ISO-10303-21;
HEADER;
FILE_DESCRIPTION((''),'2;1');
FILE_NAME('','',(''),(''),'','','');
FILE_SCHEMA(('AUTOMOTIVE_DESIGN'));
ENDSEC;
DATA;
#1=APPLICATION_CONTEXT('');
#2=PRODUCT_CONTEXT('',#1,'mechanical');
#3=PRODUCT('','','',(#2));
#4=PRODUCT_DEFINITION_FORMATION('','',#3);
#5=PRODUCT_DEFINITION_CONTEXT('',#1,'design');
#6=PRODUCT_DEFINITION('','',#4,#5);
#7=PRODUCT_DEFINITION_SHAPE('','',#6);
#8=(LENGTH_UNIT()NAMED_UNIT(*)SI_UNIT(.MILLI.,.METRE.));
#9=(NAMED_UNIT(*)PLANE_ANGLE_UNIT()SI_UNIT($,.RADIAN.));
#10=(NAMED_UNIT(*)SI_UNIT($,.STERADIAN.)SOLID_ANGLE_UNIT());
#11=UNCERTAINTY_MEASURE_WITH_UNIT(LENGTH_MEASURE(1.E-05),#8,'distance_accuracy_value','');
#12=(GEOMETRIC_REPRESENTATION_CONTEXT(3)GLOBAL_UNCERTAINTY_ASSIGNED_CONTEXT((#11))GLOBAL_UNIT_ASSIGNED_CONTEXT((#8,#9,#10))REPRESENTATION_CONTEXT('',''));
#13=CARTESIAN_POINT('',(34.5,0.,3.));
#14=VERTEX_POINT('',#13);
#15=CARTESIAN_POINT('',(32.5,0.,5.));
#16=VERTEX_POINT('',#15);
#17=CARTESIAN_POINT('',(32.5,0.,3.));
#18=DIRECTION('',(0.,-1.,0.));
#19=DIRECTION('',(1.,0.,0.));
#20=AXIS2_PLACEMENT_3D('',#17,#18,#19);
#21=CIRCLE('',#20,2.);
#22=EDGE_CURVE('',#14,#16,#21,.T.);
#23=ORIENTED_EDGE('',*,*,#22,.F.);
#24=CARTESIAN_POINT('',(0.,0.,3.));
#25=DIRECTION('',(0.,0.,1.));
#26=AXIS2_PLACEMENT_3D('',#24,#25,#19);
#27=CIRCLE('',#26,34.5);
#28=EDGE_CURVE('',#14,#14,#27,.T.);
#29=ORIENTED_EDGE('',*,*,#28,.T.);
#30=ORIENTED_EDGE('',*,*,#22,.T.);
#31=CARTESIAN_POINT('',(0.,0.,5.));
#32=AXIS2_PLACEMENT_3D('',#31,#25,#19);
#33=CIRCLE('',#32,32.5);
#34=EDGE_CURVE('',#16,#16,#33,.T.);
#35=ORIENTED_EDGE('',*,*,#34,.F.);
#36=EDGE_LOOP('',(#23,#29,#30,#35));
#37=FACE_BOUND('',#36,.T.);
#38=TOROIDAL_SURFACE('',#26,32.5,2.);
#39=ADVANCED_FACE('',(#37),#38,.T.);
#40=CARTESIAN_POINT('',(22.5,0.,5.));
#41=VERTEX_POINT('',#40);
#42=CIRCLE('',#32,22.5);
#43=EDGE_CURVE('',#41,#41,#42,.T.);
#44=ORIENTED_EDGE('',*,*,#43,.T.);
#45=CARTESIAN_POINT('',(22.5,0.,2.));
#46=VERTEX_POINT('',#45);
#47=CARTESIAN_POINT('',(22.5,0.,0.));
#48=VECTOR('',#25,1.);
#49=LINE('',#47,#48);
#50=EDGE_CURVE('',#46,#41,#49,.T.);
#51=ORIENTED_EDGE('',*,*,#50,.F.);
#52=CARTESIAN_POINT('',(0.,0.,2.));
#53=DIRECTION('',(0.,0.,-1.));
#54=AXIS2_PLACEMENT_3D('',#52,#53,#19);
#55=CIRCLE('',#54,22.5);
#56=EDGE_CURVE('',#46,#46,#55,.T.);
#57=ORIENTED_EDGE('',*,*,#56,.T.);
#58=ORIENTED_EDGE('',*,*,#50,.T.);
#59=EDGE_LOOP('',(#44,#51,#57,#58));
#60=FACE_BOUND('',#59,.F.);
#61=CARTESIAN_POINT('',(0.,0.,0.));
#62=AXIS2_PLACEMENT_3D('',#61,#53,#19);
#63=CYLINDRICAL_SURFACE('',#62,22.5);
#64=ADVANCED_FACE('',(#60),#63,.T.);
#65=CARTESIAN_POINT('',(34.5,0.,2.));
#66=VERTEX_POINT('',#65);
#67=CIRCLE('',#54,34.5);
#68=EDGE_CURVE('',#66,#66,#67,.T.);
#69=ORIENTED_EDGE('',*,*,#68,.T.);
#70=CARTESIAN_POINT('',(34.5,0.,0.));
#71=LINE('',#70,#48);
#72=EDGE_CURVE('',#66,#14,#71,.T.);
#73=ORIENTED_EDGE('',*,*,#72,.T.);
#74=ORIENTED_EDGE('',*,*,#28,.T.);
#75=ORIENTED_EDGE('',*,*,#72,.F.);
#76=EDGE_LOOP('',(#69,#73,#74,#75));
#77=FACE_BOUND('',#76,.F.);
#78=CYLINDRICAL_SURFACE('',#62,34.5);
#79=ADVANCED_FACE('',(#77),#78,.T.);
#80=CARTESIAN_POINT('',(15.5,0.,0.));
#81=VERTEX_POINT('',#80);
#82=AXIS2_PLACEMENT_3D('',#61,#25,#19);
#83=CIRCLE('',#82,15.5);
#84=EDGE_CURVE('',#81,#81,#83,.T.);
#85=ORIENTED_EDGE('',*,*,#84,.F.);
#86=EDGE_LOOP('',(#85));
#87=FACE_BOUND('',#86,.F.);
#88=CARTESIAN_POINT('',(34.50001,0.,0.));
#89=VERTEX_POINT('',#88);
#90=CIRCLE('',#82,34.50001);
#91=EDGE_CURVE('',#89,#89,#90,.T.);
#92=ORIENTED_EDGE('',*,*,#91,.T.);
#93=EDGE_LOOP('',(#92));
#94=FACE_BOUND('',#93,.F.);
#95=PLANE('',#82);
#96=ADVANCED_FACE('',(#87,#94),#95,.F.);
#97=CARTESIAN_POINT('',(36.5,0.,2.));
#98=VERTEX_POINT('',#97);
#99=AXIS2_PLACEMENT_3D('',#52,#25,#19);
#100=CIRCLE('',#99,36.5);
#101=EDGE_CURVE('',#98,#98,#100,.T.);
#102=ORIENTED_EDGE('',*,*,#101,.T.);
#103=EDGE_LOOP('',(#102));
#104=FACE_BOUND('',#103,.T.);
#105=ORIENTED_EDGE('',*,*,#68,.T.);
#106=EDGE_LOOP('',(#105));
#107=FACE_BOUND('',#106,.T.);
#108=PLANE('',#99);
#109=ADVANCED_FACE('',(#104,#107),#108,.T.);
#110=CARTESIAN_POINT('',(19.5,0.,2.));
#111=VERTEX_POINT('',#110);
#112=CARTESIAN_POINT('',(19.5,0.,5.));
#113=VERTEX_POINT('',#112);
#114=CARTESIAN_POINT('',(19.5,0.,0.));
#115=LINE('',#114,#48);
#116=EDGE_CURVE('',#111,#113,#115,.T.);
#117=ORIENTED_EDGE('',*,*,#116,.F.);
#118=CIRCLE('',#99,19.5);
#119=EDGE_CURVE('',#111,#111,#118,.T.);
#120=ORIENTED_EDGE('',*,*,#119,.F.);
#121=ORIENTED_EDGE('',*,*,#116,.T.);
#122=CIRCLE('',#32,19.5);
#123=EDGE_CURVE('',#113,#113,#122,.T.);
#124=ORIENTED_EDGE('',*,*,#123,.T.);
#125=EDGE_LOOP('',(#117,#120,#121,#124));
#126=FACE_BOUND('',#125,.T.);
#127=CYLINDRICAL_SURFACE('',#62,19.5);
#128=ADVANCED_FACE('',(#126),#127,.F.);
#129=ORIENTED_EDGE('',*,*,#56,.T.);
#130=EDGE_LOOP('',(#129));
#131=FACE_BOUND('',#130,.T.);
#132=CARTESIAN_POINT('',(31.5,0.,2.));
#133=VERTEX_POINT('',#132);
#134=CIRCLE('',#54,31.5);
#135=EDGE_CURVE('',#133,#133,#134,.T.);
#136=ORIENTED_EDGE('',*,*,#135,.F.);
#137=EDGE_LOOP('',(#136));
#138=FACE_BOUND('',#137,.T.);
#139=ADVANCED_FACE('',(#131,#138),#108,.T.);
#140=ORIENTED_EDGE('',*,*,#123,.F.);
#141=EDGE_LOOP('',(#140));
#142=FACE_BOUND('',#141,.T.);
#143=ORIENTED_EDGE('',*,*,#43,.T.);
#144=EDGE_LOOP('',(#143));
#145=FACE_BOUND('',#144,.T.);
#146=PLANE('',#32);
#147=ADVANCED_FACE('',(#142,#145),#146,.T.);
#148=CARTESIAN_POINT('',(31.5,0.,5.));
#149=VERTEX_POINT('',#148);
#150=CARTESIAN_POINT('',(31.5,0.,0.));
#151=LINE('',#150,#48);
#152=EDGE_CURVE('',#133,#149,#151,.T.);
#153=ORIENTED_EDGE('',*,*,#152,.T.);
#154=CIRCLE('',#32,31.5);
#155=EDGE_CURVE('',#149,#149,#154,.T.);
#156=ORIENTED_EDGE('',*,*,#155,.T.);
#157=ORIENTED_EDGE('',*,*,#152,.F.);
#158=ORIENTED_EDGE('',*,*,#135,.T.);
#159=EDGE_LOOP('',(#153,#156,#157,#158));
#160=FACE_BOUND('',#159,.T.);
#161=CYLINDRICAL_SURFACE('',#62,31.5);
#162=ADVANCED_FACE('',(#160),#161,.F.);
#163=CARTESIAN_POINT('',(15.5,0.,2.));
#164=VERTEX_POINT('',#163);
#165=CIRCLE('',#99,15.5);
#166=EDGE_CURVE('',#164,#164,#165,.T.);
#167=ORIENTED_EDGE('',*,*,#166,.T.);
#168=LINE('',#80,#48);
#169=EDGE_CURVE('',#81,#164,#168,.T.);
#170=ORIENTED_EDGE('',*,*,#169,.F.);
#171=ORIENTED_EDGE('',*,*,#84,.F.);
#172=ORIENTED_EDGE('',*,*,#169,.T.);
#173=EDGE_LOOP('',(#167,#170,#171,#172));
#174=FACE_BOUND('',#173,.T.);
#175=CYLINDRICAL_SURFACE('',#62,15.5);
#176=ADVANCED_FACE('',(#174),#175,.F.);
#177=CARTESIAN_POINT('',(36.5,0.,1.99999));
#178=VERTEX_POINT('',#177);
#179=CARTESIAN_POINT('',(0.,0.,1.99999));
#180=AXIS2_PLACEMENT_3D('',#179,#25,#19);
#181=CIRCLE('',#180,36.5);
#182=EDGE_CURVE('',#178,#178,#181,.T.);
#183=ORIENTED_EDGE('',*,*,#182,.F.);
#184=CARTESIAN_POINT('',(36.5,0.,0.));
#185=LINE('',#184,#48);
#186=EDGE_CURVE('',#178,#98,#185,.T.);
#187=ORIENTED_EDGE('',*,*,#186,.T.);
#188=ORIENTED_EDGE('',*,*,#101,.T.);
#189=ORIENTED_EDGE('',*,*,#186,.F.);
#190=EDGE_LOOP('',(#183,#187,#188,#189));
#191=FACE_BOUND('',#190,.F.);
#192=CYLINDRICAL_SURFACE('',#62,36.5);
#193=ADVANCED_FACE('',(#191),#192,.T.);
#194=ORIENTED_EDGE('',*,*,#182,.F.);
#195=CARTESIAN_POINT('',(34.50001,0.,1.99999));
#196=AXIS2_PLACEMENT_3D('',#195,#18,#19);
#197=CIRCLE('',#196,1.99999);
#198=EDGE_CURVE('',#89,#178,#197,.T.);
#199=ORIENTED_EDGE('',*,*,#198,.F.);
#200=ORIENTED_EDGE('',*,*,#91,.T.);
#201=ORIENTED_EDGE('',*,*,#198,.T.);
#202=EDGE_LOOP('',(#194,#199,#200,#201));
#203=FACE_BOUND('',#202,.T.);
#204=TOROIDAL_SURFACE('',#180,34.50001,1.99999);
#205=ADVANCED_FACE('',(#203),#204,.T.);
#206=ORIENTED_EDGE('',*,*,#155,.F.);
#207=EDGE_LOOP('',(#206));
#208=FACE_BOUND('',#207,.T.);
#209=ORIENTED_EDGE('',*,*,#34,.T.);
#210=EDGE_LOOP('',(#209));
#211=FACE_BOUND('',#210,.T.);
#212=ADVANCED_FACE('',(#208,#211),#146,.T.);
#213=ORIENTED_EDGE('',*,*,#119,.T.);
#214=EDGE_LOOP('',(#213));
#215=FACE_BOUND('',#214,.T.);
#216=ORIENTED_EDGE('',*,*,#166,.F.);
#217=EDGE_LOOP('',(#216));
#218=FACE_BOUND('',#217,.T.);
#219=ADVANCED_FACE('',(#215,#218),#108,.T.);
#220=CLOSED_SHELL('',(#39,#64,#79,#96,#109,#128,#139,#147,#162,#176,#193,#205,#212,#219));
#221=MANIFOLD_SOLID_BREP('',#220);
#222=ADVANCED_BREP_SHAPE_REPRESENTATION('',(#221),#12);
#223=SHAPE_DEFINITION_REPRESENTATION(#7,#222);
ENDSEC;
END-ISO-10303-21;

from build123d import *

# Parameters (mm, degrees)
F0_R     = 36.5
F0_R_2   = 34.5
F0_R_3   = 31.5
F0_R_4   = 22.5
F0_R_5   = 19.5
F1_DEPTH = 2
F2_DEPTH = 5
F3_R     = 1.99999
F4_R     = 2
F0_R_6   = 15.5
F5_DEPTH = 2


# Not quite as in the source:
# - a fillet or chamfer is up to 0.001 mm smaller than in the source, because OpenCascade refuses the exact size


with BuildPart() as f1:
    # F0 (on Top) → F1 (new body)
    with BuildSketch(Plane.XY):
        Circle(F0_R)
        Circle(F0_R_2, mode=Mode.SUBTRACT)
        Circle(F0_R_2)
        Circle(F0_R_3, mode=Mode.SUBTRACT)
        Circle(F0_R_3)
        Circle(F0_R_4, mode=Mode.SUBTRACT)
        Circle(F0_R_4)
        Circle(F0_R_5, mode=Mode.SUBTRACT)
    extrude(amount=F1_DEPTH)

    # F0 (on Top) → F2 (join)
    with BuildSketch(Plane.XY):
        Circle(F0_R_2)
        Circle(F0_R_3, mode=Mode.SUBTRACT)
        Circle(F0_R_4)
        Circle(F0_R_5, mode=Mode.SUBTRACT)
    extrude(amount=F2_DEPTH)

    # F3 (radius 2 in the source; OpenCascade refuses exactly that, so slightly less here)
    f3_edges = [f1.edges().sort_by_distance(p)[0] for p in [
        (-36.5, 0, 0),
    ]]
    fillet(f3_edges, radius=F3_R)

    # F4
    f4_edges = [f1.edges().sort_by_distance(p)[0] for p in [
        (-34.5, 0, 5),
    ]]
    fillet(f4_edges, radius=F4_R)

    # F0 (on Top) → F5 (join)
    with BuildSketch(Plane.XY):
        Circle(F0_R_5)
        Circle(F0_R_6, mode=Mode.SUBTRACT)
    extrude(amount=F5_DEPTH)


solid = f1.part
